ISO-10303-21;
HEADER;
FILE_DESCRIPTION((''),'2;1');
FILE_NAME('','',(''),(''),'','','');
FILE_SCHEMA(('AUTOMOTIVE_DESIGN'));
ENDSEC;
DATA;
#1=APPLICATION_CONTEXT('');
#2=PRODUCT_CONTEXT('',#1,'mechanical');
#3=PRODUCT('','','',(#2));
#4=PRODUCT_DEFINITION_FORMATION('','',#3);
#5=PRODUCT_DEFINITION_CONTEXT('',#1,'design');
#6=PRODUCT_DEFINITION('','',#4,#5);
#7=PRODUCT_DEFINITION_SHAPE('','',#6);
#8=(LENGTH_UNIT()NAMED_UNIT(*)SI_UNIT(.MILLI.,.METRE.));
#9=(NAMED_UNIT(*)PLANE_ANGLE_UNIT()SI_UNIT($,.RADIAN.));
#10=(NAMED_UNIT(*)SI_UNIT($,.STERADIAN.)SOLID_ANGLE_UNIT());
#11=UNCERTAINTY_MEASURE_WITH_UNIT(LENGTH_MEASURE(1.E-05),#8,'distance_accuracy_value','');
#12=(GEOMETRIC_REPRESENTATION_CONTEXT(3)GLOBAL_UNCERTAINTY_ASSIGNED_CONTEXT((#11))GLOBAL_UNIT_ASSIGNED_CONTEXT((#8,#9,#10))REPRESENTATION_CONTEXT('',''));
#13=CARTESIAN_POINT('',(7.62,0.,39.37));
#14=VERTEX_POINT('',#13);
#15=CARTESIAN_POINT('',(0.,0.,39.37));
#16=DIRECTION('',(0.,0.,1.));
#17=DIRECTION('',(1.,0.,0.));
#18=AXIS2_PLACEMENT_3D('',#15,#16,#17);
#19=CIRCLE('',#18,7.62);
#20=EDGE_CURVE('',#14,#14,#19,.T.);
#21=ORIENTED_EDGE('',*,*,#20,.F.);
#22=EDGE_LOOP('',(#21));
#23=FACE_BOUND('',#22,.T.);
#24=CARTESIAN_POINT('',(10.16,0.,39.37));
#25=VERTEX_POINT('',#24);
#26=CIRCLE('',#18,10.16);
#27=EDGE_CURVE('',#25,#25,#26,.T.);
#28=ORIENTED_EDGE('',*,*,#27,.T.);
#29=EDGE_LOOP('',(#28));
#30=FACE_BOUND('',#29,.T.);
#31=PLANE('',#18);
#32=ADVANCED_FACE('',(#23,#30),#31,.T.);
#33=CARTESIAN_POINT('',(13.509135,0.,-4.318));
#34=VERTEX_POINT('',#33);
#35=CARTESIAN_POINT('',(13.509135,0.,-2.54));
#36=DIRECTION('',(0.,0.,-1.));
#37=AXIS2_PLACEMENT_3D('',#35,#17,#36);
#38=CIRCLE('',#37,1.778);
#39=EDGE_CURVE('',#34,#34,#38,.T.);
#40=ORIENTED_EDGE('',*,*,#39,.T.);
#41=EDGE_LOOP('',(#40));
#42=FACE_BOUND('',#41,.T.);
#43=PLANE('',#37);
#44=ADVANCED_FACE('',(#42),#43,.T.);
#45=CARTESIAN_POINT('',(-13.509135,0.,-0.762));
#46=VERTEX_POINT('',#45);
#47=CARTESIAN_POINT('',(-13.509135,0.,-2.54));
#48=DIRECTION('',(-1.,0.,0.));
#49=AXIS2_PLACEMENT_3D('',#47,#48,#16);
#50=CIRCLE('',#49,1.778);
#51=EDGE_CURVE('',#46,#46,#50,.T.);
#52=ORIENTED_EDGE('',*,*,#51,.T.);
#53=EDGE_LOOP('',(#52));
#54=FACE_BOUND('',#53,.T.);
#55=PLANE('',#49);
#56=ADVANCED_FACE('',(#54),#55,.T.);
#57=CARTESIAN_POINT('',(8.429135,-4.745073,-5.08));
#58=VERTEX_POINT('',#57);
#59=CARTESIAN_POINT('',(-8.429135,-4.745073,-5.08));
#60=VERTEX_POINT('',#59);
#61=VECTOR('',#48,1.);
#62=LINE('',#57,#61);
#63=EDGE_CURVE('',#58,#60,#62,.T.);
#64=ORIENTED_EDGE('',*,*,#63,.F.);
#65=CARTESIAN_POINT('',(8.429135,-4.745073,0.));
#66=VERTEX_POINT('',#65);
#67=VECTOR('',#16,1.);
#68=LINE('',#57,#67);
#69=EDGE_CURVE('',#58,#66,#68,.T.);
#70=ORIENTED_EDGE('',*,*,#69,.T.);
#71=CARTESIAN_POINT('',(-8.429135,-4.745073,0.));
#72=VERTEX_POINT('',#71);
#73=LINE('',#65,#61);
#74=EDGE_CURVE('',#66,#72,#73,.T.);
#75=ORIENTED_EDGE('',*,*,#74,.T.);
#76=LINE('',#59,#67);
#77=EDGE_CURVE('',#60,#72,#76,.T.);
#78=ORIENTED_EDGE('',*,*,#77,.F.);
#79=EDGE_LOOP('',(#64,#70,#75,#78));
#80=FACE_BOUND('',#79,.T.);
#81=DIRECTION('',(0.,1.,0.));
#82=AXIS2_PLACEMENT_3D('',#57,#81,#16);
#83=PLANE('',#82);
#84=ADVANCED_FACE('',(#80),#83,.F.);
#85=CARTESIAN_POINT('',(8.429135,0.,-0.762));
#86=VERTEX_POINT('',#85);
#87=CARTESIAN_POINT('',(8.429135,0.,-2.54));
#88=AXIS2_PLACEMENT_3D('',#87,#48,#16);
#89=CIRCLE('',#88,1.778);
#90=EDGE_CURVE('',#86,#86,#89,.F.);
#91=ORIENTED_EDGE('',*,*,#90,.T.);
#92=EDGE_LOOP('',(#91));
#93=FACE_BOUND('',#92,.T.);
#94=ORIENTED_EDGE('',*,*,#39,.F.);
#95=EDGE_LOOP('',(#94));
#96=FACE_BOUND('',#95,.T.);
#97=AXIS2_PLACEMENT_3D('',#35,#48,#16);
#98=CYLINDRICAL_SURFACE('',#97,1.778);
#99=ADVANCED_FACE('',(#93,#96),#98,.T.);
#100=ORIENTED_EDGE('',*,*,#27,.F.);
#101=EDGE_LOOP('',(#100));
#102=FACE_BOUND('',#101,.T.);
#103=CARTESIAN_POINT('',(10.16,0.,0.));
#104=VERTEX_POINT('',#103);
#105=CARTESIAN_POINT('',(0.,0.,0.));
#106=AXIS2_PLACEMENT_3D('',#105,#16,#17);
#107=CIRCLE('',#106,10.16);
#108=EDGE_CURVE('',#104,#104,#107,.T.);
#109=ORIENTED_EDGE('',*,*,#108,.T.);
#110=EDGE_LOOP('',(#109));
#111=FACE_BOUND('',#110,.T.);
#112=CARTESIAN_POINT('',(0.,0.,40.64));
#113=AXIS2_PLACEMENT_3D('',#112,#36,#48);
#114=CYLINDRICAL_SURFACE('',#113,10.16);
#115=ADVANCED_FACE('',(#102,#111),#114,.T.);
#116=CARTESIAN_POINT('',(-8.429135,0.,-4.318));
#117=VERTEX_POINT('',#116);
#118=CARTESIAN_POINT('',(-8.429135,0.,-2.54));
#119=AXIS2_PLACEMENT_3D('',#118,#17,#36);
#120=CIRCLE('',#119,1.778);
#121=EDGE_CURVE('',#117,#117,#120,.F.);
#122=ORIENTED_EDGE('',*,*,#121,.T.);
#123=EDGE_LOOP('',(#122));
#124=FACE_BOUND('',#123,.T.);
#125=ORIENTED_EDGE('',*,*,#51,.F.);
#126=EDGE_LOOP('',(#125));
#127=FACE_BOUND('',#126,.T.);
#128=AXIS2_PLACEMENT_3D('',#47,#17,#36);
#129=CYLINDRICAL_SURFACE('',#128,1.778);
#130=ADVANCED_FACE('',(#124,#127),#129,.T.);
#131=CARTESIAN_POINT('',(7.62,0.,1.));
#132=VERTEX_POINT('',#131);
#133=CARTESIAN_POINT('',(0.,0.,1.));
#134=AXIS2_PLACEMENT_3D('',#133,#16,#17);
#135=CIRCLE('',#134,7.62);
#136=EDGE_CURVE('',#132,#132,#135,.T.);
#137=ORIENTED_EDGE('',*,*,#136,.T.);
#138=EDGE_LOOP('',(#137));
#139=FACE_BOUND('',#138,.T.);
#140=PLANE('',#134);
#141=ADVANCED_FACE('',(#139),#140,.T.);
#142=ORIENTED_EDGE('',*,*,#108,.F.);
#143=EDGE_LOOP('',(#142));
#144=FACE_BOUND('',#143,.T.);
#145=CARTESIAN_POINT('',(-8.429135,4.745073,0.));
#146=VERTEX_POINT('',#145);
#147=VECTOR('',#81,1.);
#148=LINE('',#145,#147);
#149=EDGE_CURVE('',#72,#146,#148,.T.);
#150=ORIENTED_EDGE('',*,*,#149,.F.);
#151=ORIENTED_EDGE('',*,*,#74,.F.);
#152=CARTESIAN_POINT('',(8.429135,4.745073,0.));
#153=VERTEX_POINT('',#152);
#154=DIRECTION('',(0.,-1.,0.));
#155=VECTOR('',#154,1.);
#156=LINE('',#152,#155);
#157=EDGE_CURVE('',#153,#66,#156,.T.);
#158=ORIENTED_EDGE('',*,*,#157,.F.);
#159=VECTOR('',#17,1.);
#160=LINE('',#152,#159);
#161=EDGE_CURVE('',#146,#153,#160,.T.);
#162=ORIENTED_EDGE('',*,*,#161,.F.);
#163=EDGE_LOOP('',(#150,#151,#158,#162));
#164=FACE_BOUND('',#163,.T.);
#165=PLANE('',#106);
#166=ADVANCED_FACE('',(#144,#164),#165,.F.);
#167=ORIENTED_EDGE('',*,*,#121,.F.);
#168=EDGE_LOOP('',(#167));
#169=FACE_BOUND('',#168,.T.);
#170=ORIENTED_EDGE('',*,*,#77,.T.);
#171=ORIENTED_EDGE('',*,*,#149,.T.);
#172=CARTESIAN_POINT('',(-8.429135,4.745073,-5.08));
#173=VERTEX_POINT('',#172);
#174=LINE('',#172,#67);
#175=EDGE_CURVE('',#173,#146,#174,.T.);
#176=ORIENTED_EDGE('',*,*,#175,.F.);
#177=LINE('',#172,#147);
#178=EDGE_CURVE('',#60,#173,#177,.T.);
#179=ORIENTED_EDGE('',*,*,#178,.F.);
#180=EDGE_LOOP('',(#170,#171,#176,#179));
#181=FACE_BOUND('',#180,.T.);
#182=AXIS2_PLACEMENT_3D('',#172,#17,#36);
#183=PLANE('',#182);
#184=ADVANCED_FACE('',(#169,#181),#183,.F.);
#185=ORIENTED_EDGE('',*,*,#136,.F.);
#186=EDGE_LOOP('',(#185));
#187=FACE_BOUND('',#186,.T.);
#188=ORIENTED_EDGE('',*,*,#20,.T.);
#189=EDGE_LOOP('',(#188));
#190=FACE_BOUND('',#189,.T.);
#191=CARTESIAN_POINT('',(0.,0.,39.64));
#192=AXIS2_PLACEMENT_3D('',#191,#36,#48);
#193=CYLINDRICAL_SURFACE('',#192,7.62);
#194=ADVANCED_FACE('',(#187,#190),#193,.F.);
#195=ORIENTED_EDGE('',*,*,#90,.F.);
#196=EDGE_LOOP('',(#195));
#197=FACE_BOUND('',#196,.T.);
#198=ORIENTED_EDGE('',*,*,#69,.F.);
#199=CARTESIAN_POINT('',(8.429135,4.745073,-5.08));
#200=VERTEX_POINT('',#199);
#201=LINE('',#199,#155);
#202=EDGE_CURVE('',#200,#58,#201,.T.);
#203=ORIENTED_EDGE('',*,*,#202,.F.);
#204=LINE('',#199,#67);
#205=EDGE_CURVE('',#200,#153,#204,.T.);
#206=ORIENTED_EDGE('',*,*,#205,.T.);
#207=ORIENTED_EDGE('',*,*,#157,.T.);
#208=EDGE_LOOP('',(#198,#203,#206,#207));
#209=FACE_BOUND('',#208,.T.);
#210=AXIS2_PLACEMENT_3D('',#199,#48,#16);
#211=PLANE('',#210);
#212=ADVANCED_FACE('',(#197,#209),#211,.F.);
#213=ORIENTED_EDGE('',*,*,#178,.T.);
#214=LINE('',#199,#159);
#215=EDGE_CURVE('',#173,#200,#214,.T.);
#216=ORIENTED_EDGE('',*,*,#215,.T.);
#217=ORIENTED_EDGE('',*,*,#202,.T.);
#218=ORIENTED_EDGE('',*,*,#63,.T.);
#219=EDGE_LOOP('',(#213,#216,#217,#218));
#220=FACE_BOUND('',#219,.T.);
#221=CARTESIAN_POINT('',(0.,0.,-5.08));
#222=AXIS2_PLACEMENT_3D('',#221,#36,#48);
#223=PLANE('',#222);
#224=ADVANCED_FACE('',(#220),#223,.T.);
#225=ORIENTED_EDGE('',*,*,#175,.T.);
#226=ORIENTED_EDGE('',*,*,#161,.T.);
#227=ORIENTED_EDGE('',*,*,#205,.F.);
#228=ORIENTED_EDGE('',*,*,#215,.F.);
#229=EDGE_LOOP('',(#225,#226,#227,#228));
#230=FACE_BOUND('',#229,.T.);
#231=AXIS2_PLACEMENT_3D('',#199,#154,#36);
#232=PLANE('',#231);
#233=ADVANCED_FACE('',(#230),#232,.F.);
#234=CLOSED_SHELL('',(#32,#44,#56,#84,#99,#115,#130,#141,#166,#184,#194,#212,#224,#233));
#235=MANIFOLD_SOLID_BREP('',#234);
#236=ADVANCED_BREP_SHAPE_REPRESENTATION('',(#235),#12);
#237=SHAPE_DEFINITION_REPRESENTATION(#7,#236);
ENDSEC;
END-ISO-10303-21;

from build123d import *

# Parameters (mm, degrees)
SKETCH2_R           = 10.674295377
CUT_EXTRUDE1_DEPTH  = 1.27
SKETCH3_W           = 16.858270558
SKETCH3_H           = 9.490145314
BOSS_EXTRUDE1_DEPTH = 5.08
SKETCH4_R           = 1.778
BOSS_EXTRUDE2_DEPTH = 5.08
BOSS_EXTRUDE3_START = 5.08
SKETCH5_R           = 1.778
BOSS_EXTRUDE3_DEPTH = 5.08


# Read off the part's stored shape, not the designer's step: Extrude-Thin1
with BuildPart() as part:
    # Extrude-Thin1 outline → Extrude-Thin1 (revolve)
    with BuildSketch(Plane.XZ):
        Polygon((10.16, 40.64), (0, 40.64), (0, 39.64), (7.62, 39.64), (7.62, 1), (0, 1), (0, 0), (10.16, 0), align=None)
    revolve(axis=Axis((0, 0, 0), (0, 0, 1)))

    # Sketch2 → Cut-Extrude1 (cut)
    with BuildSketch(Plane.XY.offset(40.64)):
        Circle(SKETCH2_R)
    extrude(amount=-CUT_EXTRUDE1_DEPTH, mode=Mode.SUBTRACT)

    # Sketch3 → Boss-Extrude1 (add)
    with BuildSketch(Plane(origin=(0, 0, 0), x_dir=(-1, 0, 0), z_dir=(0, 0, -1))):
        Rectangle(SKETCH3_W, SKETCH3_H)
    extrude(amount=BOSS_EXTRUDE1_DEPTH)

    # Sketch4 → Boss-Extrude2 (add)
    with BuildSketch(Plane.ZY.offset(8.429135279)):
        with Locations(Location((-2.54, 0, 0), (0, 0, 180))):
            Circle(SKETCH4_R)
    extrude(amount=BOSS_EXTRUDE2_DEPTH)

    # Sketch5 → Boss-Extrude3 (add)
    with BuildSketch(Plane(origin=(8.429135279, 0, 0), x_dir=(0, 0, -1), z_dir=(1, 0, 0)).offset(BOSS_EXTRUDE3_START)):
        with Locations((2.54, 0)):
            Circle(SKETCH5_R)
    extrude(amount=-BOSS_EXTRUDE3_DEPTH)


solid = part.part
